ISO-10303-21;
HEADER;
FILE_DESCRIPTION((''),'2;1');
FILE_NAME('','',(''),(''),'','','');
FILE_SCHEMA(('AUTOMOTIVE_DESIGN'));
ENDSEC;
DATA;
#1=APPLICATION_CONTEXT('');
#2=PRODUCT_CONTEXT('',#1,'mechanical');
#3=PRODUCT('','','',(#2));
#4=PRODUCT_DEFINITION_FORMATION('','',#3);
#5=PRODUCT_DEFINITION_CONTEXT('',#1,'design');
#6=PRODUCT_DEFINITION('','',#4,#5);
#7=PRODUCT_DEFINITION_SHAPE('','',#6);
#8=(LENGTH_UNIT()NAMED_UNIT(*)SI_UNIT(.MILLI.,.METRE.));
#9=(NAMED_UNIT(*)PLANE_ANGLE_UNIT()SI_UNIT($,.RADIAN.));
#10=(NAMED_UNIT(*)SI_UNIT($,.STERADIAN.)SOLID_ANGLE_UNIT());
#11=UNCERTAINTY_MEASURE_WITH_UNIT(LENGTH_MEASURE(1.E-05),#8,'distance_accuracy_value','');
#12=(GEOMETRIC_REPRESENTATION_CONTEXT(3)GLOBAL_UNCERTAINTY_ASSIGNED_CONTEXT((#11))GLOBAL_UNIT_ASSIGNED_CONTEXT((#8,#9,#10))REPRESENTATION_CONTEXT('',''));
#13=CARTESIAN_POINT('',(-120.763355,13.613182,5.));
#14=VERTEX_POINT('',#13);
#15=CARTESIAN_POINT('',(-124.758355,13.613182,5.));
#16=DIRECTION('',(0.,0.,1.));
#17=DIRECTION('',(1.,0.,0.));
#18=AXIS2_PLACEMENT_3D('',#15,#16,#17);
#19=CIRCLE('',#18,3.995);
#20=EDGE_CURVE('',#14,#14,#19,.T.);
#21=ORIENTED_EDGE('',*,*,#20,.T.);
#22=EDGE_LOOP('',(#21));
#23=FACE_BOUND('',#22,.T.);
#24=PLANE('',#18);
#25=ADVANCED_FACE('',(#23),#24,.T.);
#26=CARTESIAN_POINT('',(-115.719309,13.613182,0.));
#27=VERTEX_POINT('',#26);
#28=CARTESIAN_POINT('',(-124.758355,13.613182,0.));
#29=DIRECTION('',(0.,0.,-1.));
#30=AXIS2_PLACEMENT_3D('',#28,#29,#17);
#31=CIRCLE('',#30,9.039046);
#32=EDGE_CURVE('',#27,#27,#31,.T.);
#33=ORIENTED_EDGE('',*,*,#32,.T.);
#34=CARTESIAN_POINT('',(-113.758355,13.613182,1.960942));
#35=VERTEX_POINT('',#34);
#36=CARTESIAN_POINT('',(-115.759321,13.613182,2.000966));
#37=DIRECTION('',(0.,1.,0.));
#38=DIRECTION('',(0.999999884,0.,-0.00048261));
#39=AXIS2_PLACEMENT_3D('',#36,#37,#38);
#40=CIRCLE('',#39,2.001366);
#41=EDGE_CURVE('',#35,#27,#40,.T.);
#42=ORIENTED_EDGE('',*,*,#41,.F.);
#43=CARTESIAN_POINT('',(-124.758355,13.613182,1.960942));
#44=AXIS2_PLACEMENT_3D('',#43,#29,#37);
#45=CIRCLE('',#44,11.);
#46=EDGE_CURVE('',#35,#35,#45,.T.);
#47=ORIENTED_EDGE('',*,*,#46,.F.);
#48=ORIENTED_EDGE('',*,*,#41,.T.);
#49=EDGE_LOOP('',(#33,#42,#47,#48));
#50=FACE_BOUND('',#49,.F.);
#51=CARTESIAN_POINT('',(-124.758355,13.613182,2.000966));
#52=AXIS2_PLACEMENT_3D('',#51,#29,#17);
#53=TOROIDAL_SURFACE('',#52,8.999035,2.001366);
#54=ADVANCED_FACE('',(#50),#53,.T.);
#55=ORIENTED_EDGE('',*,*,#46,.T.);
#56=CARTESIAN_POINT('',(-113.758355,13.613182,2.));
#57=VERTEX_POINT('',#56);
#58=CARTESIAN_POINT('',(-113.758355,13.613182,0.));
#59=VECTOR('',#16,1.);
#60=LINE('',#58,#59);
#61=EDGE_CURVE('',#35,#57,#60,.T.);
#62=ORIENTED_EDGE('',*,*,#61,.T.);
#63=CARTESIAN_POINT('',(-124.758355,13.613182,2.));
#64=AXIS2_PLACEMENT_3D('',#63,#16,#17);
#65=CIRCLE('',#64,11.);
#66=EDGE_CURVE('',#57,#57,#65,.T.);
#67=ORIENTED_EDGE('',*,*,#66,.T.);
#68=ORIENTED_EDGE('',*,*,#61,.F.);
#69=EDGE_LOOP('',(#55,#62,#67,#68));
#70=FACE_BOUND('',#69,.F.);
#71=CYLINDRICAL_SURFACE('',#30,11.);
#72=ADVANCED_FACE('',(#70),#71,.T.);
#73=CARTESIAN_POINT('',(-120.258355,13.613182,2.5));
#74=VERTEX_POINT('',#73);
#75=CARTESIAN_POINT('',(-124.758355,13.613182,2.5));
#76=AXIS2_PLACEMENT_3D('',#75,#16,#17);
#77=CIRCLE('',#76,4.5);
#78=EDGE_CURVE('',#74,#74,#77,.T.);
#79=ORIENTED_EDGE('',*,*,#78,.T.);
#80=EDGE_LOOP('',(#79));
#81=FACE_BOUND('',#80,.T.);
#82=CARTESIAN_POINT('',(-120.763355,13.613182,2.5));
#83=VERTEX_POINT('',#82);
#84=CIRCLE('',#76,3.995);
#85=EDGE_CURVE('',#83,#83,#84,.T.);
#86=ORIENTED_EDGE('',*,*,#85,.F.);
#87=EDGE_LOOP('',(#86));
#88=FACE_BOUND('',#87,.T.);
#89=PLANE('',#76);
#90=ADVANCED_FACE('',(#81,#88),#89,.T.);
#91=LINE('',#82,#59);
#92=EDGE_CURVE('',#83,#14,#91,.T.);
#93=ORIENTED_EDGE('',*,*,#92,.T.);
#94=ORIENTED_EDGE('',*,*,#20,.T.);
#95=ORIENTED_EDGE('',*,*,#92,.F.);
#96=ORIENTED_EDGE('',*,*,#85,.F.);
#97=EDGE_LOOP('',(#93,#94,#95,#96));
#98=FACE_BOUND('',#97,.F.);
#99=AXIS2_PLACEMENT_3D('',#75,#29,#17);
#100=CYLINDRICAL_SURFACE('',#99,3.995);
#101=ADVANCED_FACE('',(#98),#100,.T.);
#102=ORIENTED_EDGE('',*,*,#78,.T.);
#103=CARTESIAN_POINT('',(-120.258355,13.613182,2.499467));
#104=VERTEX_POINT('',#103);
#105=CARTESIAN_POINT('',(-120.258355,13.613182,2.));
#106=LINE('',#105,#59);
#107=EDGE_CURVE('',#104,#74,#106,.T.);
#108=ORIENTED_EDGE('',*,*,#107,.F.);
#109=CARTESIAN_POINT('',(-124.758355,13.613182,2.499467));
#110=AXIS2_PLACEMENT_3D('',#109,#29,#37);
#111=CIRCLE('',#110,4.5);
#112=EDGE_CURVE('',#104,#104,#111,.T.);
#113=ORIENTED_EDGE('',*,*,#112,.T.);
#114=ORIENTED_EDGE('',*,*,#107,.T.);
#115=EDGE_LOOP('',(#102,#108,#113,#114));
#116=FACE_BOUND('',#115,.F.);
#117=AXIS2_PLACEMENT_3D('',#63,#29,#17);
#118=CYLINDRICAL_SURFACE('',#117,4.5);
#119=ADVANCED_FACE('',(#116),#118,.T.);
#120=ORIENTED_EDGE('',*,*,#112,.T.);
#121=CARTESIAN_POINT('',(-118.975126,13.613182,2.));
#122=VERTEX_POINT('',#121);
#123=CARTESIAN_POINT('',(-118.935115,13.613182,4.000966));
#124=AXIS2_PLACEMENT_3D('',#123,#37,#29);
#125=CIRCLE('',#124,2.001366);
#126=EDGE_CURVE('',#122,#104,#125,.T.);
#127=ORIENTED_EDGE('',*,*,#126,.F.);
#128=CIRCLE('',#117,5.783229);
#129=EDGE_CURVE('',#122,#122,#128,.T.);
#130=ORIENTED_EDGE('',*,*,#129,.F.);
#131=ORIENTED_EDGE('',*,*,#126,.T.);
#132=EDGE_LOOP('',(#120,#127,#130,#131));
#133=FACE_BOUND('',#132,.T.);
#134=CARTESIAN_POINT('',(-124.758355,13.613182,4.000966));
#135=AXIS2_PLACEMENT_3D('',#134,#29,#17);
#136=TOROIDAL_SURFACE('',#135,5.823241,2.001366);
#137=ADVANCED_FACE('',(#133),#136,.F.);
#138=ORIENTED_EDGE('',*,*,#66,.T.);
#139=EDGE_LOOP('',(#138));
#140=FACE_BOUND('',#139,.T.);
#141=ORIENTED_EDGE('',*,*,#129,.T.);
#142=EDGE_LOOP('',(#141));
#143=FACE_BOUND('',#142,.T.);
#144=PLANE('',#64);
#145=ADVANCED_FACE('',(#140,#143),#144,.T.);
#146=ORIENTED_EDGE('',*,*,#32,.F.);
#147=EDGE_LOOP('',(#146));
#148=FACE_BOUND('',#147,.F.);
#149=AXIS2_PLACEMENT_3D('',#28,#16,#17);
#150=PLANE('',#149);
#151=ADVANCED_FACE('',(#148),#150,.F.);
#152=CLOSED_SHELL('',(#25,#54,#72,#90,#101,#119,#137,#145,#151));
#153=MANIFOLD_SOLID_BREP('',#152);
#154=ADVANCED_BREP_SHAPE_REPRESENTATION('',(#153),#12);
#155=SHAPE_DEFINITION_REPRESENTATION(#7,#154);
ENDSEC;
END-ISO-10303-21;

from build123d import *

# Parameters (mm, degrees)
F0_R     = 11
F1_DEPTH = 2
F2_R     = 4.5
F3_DEPTH = 0.5
F4_R     = 3.995
F5_DEPTH = 2.5


# Not quite as in the source:
# - a fillet or chamfer that OpenCascade refuses, or shapes differently, is made with other operations: its cross-section is extruded or revolved along the edge and cut away or added


with BuildPart() as f1:
    # F0 (on Top) → F1 (new body)
    with BuildSketch(Plane.XY):
        with Locations((-124.7583553195, 13.61318212)):
            Circle(F0_R)
    extrude(amount=F1_DEPTH)

    # F2 (on face) → F3 (join)
    with BuildSketch(Plane.XY.offset(2)):
        with Locations((-124.7583553195, 13.61318212)):
            Circle(F2_R)
    extrude(amount=F3_DEPTH)

    # F4 (on face) → F5 (join)
    with BuildSketch(Plane.XY.offset(2.5)):
        with Locations((-124.7583553195, 13.61318212)):
            Circle(F4_R)
    extrude(amount=F5_DEPTH)

    # F6: fillet of radius 2 on 2 edges, made by hand

    # F6_s1 → F6_t2 (revolve)
    with BuildSketch(Plane.XZ.offset(-13.61318212)):
        with BuildLine():
            ThreePointArc((-118.9351147195, 1.9996), (-119.642533578, 2.1287949759), (-120.2586198399, 2.4996999517))
            Line((-120.2586198399, 2.4996999517), (-120.3909703519, 2.3495733784))
            ThreePointArc((-120.3909703519, 2.3495733784), (-120.458491888, 2.2498499759), (-120.458491888, 2))
            Line((-120.458491888, 2), (-120.2583553195, 1.7998634315))
            ThreePointArc((-120.2583553195, 1.7998634315), (-119.5967350195, 1.7998634315), (-118.9351147195, 1.7994634315))
            Line((-118.9351147195, 1.7994634315), (-118.9351147195, 1.9996))
        make_face()
    revolve(axis=Axis((-124.7583553195, 13.61318212, 2), (0, 0, 1)))

    # F6_s3 → F6_t4 (revolve, cut)
    with BuildSketch(Plane.XZ.offset(-13.61318212)):
        with BuildLine():
            ThreePointArc((-113.7579553195, 1.999999807), (-114.3444830549, 0.5854449892), (-115.7593207719, -0.0004))
            Line((-115.7593207719, -0.0004), (-115.7593207719, -0.2005365685))
            ThreePointArc((-115.7593207719, -0.2005365685), (-114.7588380457, -0.2001365685), (-113.7583553195, -0.2001365685))
            Line((-113.7583553195, -0.2001365685), (-113.558218751, 0))
            ThreePointArc((-113.558218751, 0), (-113.558218751, 0.9999999035), (-113.5578187743, 1.9999032191))
            Line((-113.5578187743, 1.9999032191), (-113.7579553195, 1.999999807))
        make_face()
    revolve(axis=Axis((-124.7583553195, 13.61318212, 0), (0, 0, 1)), mode=Mode.SUBTRACT)


solid = f1.part
